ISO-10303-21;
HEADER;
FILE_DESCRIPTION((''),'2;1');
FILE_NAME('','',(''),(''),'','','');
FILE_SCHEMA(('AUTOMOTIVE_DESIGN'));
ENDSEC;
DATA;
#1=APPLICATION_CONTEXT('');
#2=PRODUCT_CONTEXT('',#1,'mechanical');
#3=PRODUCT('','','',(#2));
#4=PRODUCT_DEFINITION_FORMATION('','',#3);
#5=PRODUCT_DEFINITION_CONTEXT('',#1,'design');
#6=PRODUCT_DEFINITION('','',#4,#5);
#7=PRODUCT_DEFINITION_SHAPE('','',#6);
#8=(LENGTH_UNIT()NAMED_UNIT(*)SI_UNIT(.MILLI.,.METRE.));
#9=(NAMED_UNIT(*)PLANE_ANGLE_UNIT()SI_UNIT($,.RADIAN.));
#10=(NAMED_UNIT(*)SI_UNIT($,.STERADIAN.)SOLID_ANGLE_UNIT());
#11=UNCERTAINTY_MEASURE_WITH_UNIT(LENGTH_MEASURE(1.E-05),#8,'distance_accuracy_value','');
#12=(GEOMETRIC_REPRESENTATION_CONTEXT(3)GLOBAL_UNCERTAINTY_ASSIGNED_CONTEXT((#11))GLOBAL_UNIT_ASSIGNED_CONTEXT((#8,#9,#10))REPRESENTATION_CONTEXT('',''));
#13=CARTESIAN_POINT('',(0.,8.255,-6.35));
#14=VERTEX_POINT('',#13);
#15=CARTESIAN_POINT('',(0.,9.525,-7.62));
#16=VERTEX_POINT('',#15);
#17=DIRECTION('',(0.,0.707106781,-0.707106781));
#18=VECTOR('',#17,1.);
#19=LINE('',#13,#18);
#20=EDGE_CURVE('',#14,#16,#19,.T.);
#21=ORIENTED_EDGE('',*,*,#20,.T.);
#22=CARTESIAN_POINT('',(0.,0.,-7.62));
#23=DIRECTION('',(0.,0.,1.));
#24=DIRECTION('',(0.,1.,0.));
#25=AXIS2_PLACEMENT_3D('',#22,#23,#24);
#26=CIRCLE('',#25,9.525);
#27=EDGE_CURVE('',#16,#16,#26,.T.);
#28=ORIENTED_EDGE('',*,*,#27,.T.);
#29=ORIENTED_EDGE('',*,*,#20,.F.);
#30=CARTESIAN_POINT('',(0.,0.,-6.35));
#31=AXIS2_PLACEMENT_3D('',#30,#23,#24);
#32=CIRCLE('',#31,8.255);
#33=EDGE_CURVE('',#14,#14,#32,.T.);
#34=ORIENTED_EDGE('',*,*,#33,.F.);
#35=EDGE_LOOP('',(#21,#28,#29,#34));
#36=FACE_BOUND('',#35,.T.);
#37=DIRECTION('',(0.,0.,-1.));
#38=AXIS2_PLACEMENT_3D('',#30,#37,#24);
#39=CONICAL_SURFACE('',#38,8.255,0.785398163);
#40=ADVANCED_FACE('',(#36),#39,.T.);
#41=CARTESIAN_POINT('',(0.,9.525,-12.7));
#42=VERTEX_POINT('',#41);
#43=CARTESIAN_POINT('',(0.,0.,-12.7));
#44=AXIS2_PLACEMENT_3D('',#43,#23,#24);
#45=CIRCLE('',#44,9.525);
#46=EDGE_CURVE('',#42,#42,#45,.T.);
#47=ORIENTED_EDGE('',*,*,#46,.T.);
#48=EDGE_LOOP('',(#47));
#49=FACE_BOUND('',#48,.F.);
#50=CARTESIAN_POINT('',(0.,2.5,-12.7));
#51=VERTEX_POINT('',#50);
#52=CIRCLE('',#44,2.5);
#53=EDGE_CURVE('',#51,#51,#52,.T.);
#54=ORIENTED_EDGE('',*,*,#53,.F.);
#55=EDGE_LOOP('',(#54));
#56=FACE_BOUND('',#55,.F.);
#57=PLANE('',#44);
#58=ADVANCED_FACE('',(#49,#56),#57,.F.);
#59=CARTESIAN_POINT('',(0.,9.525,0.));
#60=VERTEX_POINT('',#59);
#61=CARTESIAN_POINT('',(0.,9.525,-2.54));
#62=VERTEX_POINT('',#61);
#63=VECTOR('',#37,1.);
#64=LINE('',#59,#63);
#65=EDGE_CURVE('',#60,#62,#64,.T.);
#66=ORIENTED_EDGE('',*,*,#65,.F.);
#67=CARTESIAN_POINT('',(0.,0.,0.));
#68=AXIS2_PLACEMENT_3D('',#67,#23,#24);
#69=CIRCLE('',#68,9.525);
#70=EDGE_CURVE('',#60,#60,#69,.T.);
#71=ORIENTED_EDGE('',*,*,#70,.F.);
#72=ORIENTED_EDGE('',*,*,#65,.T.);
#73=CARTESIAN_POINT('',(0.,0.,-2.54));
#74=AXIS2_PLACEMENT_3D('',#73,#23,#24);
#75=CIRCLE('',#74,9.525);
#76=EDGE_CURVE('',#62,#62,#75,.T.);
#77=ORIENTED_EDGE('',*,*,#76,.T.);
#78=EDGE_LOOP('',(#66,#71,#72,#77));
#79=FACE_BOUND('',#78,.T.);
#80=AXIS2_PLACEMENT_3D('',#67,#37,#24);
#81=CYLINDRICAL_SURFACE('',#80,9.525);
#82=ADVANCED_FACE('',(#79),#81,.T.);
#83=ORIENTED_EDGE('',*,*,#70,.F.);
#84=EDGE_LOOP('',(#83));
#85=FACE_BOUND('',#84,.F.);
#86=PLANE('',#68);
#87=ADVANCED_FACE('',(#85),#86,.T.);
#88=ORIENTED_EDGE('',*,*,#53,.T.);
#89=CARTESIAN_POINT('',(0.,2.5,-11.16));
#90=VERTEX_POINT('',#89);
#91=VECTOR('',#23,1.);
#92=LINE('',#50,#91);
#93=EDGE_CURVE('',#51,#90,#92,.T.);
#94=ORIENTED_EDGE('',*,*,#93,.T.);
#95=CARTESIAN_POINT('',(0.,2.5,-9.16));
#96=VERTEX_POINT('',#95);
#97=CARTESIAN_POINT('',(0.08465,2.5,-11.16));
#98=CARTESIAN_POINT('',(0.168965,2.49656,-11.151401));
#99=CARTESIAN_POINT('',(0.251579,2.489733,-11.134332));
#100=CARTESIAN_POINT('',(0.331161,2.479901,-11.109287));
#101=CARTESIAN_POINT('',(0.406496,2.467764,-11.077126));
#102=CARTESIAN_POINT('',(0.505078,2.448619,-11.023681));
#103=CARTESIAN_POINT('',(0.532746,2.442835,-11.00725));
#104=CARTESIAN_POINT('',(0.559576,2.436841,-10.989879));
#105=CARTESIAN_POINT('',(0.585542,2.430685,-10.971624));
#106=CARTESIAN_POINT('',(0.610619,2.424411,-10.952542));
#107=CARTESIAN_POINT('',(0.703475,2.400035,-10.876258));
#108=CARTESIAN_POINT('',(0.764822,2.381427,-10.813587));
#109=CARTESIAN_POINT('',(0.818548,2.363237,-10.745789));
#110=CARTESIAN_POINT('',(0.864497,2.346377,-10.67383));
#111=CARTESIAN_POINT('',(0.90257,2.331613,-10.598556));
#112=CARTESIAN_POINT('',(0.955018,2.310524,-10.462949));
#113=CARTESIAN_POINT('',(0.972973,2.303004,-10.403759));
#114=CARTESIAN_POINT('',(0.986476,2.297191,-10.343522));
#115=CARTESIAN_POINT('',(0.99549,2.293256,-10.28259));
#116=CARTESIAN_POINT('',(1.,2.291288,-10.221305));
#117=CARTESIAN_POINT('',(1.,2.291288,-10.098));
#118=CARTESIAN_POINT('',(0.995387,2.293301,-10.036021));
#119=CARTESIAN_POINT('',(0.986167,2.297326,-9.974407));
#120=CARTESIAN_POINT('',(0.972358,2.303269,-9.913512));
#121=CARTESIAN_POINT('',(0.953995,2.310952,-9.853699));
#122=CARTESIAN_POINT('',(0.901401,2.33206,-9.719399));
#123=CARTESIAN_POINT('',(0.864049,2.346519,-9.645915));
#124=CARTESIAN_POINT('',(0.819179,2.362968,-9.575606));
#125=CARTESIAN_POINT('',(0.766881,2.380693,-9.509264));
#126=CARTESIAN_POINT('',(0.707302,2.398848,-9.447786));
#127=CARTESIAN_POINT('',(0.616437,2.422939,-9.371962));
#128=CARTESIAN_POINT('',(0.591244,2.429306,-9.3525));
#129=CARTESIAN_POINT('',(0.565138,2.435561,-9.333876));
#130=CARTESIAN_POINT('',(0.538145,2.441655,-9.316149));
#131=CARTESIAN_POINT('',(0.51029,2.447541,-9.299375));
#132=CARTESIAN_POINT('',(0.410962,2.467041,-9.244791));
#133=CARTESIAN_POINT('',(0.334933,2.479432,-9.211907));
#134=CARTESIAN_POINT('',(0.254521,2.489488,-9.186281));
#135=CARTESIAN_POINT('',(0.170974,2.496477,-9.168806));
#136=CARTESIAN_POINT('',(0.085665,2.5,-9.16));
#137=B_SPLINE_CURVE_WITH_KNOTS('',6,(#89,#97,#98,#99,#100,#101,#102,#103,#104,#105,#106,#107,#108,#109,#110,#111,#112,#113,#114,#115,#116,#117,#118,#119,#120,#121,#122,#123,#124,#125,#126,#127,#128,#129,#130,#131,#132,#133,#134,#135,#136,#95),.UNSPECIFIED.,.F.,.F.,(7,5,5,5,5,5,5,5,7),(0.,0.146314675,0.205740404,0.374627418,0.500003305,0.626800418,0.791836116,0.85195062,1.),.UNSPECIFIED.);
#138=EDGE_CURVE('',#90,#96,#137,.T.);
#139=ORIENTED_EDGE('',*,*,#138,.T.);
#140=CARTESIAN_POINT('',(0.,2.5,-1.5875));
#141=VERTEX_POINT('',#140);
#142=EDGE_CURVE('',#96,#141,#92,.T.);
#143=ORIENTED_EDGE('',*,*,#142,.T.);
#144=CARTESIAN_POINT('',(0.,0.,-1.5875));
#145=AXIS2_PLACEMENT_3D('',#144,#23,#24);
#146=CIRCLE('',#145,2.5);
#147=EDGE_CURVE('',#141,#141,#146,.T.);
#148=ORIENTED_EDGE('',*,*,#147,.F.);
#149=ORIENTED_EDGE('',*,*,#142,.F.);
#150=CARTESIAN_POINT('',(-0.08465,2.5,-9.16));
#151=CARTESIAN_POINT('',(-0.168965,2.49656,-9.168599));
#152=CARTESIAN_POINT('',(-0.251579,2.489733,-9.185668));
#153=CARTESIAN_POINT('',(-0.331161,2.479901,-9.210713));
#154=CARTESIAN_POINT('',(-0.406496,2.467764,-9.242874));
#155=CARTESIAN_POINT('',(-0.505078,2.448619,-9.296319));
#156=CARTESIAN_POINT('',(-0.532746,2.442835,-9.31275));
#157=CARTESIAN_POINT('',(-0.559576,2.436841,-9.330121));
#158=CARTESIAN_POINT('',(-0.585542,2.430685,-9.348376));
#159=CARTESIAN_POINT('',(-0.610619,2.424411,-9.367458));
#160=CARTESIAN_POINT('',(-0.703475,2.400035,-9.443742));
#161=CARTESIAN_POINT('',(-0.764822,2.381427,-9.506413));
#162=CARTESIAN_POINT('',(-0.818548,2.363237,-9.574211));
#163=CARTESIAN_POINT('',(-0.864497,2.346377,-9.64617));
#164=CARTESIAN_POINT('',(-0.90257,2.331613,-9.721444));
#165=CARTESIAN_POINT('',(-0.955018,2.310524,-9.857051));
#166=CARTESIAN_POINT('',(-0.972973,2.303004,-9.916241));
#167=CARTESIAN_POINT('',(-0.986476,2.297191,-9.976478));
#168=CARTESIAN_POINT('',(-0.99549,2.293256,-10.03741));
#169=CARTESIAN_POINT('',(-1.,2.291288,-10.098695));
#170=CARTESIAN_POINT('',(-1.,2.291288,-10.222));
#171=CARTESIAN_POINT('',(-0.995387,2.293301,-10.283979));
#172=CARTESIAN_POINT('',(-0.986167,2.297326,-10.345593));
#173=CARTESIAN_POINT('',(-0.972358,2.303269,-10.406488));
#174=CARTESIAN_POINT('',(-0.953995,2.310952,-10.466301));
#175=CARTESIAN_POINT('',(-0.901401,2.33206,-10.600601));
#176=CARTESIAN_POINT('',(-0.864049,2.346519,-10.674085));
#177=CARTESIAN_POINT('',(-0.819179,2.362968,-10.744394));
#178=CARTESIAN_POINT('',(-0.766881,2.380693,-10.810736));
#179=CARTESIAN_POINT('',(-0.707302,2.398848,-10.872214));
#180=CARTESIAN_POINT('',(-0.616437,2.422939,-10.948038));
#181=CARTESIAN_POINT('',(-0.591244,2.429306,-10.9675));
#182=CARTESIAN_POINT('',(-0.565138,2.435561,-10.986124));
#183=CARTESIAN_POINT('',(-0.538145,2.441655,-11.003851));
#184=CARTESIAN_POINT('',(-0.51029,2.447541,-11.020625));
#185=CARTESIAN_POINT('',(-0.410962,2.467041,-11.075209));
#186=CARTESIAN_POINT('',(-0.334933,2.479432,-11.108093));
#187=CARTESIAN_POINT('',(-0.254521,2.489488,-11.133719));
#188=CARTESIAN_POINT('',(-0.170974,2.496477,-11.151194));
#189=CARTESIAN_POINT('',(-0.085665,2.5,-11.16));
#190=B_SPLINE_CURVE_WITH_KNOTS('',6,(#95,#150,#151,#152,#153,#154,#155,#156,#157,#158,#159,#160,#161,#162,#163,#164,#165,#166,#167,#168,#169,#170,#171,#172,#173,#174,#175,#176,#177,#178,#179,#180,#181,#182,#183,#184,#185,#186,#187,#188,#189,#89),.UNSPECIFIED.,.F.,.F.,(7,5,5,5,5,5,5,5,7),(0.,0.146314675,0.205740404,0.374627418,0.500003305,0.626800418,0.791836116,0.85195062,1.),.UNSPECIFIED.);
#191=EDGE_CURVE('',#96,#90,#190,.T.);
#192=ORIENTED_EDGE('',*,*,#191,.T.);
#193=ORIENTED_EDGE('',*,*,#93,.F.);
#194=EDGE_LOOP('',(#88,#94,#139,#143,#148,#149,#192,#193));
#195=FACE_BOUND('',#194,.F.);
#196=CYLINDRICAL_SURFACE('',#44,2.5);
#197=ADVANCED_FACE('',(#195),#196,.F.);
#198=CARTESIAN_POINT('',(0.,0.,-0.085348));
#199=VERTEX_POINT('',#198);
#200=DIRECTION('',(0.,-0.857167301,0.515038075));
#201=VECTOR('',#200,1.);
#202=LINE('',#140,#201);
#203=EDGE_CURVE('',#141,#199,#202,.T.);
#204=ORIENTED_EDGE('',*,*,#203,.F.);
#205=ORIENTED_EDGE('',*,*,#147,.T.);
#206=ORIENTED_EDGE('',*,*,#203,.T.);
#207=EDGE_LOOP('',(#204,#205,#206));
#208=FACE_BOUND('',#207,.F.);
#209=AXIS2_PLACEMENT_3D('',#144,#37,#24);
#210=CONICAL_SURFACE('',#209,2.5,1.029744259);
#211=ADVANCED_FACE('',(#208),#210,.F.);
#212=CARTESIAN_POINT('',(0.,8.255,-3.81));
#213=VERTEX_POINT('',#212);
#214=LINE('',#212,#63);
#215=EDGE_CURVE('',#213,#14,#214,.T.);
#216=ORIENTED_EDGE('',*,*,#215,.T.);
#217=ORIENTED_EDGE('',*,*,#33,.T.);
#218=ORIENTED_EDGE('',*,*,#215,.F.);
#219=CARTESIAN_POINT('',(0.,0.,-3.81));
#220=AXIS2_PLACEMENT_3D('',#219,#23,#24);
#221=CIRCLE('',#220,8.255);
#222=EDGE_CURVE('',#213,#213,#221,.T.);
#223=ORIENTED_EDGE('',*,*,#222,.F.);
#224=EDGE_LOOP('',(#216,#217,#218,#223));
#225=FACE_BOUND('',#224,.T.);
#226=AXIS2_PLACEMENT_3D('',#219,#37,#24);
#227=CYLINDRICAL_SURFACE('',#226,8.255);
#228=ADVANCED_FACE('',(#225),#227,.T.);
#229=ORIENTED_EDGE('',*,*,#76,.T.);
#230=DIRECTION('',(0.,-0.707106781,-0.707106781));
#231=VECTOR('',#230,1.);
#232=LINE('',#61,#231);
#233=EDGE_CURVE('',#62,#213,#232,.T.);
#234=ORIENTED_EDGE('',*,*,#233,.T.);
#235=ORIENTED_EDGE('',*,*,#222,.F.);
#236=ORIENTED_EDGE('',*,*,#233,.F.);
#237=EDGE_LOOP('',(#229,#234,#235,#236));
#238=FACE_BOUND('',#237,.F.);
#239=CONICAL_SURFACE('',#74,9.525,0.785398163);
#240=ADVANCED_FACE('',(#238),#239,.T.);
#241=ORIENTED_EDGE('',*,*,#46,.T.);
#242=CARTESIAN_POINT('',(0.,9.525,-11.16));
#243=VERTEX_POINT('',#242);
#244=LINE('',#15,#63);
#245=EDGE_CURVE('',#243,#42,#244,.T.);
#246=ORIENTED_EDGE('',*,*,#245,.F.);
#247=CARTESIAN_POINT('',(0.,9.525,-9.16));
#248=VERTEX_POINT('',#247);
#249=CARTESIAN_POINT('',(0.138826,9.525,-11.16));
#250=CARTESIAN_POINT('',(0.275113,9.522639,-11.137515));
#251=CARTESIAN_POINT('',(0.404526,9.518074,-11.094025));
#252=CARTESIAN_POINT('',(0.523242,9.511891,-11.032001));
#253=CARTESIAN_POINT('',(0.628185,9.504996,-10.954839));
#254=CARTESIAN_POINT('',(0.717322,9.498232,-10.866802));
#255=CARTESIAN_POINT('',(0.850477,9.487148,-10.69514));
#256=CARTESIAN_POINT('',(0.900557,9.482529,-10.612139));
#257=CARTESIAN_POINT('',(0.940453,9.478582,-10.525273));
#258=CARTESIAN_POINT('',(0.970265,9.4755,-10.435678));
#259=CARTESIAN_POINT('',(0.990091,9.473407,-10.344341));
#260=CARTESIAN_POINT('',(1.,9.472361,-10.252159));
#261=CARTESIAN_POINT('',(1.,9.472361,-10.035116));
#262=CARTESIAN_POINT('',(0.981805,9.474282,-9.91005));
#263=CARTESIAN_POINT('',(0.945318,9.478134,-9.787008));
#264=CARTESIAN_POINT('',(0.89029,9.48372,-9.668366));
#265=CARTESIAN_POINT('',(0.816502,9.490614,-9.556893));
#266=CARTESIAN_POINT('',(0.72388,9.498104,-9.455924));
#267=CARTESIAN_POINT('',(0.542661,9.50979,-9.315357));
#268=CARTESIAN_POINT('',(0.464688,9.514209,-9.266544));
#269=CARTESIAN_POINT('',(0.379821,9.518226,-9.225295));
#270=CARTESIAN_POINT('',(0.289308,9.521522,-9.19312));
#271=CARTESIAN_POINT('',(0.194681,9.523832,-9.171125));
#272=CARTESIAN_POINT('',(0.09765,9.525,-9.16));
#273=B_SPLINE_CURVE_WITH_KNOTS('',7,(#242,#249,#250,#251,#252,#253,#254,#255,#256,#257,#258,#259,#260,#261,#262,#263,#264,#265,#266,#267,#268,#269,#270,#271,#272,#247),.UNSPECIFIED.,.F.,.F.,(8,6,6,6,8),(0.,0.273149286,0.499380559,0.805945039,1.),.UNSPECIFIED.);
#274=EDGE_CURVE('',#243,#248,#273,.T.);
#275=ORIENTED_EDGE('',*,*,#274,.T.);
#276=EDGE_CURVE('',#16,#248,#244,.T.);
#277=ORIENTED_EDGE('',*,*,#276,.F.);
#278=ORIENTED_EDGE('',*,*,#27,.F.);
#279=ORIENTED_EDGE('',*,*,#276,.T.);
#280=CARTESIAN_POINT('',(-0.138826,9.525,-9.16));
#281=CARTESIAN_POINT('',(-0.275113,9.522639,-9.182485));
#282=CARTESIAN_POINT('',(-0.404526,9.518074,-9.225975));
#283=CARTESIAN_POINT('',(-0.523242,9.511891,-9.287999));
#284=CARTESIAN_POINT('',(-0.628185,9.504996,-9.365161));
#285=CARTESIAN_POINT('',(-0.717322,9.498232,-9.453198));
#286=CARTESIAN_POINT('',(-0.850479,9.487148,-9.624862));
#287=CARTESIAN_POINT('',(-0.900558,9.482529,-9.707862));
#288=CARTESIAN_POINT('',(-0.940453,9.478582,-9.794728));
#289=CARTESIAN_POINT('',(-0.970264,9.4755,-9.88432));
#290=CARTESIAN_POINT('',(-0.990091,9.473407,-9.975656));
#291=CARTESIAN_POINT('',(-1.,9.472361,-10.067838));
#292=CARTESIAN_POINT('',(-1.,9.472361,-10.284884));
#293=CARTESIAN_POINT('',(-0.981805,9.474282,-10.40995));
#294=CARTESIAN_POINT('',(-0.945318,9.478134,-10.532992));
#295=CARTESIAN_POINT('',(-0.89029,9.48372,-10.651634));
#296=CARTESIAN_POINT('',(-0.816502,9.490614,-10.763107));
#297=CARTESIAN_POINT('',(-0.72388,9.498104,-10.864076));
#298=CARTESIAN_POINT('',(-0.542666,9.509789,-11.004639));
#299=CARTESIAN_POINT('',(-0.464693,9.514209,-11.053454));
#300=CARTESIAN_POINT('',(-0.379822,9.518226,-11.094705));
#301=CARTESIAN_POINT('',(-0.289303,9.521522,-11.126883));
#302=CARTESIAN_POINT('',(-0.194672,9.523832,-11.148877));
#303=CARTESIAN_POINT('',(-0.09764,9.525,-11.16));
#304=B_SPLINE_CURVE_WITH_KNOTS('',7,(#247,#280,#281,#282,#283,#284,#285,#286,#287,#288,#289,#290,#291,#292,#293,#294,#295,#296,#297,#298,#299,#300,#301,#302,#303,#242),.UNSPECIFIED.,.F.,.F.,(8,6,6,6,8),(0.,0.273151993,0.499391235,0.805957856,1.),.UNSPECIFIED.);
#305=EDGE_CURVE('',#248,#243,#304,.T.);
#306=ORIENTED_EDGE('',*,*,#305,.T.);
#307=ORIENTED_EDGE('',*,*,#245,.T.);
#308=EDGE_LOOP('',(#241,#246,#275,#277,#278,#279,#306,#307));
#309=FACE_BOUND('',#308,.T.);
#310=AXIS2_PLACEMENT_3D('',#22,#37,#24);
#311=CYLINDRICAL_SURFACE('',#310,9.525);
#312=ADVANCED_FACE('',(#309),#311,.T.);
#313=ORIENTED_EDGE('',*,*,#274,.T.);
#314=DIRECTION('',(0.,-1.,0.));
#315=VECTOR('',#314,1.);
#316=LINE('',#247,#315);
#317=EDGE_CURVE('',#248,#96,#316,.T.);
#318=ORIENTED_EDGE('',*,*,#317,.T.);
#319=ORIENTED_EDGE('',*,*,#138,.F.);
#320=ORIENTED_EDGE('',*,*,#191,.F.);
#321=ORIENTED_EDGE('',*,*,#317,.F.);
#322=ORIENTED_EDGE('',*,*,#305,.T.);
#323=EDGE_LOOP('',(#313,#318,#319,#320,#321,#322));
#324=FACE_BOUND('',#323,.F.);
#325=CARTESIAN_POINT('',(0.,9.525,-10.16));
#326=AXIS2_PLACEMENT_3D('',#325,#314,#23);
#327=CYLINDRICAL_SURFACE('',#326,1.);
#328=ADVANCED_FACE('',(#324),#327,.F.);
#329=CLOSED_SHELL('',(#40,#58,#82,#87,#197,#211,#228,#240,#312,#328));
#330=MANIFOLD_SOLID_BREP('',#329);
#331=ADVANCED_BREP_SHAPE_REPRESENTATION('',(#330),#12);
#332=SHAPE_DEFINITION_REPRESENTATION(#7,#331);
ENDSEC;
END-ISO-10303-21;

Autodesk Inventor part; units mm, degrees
ref_plane "YZ Plane" through (0, 0, 0) normal (1, 0, 0) x (0, 1, 0)
ref_plane "XY Plane" through (0, 0, 0) normal (0, 0, 1) x (1, 0, 0)
sketch "Sketch1" plane through (0, 0, 0) normal (1, 0, 0) x (0, 1, 0)
  line L0 (0, 0) -> (9.525, 0)
  line L1 (9.525, 0) -> (9.525, -2.54)
  line L2 (9.525, -2.54) -> (8.255, -3.81)
  line L3 (8.255, -3.81) -> (8.255, -6.35)
  line L4 (8.255, -6.35) -> (9.525, -7.62)
  line L5 (9.525, -7.62) -> (9.525, -12.7)
  line L6 (9.525, -12.7) -> (0, -12.7)
  line L7 (0, -12.7) -> (0, 0)
  line L8 (0, -15.24) -> (0, 2.54) projected
  dimension "d0" = 9.525
  dimension "d1" = 135
  dimension "d2" = 2.54
  dimension "d4" = 1.27
  dimension "d5" = 12.7
  dimension "d7" = 2.54
revolve "Revolution1" add sketch "Sketch1" angle 360 about axis through (0, 0, -10) along (0, 0, 1)
sketch "Sketch2" plane through (0, 0, -12.7) normal (0, 0, -1) x (-1, 0, 0)
  circle A0 centre (0, 0) radius 9.525 projected
hole "Hole1" at (0, 0, -12.7) direction (0, 0, 1) diameter 5 depth 11.1125 tip angle 118
ref_plane "Work Plane1" through (0, 9.525, -10.16) normal (0, 1, 0) x (-1, 0, 0)
sketch "Sketch3" plane through (0, 9.525, -10.16) normal (0, 1, 0) x (-1, 0, 0)
  line L0 (0, 10.16) -> (0, 0) construction
  dimension "d16" = 10.16
hole "Hole2" at (0, 9.525, -10.16) direction (0, -1, 0) diameter 2 end up to surface
properties part number "wheel_hub"
